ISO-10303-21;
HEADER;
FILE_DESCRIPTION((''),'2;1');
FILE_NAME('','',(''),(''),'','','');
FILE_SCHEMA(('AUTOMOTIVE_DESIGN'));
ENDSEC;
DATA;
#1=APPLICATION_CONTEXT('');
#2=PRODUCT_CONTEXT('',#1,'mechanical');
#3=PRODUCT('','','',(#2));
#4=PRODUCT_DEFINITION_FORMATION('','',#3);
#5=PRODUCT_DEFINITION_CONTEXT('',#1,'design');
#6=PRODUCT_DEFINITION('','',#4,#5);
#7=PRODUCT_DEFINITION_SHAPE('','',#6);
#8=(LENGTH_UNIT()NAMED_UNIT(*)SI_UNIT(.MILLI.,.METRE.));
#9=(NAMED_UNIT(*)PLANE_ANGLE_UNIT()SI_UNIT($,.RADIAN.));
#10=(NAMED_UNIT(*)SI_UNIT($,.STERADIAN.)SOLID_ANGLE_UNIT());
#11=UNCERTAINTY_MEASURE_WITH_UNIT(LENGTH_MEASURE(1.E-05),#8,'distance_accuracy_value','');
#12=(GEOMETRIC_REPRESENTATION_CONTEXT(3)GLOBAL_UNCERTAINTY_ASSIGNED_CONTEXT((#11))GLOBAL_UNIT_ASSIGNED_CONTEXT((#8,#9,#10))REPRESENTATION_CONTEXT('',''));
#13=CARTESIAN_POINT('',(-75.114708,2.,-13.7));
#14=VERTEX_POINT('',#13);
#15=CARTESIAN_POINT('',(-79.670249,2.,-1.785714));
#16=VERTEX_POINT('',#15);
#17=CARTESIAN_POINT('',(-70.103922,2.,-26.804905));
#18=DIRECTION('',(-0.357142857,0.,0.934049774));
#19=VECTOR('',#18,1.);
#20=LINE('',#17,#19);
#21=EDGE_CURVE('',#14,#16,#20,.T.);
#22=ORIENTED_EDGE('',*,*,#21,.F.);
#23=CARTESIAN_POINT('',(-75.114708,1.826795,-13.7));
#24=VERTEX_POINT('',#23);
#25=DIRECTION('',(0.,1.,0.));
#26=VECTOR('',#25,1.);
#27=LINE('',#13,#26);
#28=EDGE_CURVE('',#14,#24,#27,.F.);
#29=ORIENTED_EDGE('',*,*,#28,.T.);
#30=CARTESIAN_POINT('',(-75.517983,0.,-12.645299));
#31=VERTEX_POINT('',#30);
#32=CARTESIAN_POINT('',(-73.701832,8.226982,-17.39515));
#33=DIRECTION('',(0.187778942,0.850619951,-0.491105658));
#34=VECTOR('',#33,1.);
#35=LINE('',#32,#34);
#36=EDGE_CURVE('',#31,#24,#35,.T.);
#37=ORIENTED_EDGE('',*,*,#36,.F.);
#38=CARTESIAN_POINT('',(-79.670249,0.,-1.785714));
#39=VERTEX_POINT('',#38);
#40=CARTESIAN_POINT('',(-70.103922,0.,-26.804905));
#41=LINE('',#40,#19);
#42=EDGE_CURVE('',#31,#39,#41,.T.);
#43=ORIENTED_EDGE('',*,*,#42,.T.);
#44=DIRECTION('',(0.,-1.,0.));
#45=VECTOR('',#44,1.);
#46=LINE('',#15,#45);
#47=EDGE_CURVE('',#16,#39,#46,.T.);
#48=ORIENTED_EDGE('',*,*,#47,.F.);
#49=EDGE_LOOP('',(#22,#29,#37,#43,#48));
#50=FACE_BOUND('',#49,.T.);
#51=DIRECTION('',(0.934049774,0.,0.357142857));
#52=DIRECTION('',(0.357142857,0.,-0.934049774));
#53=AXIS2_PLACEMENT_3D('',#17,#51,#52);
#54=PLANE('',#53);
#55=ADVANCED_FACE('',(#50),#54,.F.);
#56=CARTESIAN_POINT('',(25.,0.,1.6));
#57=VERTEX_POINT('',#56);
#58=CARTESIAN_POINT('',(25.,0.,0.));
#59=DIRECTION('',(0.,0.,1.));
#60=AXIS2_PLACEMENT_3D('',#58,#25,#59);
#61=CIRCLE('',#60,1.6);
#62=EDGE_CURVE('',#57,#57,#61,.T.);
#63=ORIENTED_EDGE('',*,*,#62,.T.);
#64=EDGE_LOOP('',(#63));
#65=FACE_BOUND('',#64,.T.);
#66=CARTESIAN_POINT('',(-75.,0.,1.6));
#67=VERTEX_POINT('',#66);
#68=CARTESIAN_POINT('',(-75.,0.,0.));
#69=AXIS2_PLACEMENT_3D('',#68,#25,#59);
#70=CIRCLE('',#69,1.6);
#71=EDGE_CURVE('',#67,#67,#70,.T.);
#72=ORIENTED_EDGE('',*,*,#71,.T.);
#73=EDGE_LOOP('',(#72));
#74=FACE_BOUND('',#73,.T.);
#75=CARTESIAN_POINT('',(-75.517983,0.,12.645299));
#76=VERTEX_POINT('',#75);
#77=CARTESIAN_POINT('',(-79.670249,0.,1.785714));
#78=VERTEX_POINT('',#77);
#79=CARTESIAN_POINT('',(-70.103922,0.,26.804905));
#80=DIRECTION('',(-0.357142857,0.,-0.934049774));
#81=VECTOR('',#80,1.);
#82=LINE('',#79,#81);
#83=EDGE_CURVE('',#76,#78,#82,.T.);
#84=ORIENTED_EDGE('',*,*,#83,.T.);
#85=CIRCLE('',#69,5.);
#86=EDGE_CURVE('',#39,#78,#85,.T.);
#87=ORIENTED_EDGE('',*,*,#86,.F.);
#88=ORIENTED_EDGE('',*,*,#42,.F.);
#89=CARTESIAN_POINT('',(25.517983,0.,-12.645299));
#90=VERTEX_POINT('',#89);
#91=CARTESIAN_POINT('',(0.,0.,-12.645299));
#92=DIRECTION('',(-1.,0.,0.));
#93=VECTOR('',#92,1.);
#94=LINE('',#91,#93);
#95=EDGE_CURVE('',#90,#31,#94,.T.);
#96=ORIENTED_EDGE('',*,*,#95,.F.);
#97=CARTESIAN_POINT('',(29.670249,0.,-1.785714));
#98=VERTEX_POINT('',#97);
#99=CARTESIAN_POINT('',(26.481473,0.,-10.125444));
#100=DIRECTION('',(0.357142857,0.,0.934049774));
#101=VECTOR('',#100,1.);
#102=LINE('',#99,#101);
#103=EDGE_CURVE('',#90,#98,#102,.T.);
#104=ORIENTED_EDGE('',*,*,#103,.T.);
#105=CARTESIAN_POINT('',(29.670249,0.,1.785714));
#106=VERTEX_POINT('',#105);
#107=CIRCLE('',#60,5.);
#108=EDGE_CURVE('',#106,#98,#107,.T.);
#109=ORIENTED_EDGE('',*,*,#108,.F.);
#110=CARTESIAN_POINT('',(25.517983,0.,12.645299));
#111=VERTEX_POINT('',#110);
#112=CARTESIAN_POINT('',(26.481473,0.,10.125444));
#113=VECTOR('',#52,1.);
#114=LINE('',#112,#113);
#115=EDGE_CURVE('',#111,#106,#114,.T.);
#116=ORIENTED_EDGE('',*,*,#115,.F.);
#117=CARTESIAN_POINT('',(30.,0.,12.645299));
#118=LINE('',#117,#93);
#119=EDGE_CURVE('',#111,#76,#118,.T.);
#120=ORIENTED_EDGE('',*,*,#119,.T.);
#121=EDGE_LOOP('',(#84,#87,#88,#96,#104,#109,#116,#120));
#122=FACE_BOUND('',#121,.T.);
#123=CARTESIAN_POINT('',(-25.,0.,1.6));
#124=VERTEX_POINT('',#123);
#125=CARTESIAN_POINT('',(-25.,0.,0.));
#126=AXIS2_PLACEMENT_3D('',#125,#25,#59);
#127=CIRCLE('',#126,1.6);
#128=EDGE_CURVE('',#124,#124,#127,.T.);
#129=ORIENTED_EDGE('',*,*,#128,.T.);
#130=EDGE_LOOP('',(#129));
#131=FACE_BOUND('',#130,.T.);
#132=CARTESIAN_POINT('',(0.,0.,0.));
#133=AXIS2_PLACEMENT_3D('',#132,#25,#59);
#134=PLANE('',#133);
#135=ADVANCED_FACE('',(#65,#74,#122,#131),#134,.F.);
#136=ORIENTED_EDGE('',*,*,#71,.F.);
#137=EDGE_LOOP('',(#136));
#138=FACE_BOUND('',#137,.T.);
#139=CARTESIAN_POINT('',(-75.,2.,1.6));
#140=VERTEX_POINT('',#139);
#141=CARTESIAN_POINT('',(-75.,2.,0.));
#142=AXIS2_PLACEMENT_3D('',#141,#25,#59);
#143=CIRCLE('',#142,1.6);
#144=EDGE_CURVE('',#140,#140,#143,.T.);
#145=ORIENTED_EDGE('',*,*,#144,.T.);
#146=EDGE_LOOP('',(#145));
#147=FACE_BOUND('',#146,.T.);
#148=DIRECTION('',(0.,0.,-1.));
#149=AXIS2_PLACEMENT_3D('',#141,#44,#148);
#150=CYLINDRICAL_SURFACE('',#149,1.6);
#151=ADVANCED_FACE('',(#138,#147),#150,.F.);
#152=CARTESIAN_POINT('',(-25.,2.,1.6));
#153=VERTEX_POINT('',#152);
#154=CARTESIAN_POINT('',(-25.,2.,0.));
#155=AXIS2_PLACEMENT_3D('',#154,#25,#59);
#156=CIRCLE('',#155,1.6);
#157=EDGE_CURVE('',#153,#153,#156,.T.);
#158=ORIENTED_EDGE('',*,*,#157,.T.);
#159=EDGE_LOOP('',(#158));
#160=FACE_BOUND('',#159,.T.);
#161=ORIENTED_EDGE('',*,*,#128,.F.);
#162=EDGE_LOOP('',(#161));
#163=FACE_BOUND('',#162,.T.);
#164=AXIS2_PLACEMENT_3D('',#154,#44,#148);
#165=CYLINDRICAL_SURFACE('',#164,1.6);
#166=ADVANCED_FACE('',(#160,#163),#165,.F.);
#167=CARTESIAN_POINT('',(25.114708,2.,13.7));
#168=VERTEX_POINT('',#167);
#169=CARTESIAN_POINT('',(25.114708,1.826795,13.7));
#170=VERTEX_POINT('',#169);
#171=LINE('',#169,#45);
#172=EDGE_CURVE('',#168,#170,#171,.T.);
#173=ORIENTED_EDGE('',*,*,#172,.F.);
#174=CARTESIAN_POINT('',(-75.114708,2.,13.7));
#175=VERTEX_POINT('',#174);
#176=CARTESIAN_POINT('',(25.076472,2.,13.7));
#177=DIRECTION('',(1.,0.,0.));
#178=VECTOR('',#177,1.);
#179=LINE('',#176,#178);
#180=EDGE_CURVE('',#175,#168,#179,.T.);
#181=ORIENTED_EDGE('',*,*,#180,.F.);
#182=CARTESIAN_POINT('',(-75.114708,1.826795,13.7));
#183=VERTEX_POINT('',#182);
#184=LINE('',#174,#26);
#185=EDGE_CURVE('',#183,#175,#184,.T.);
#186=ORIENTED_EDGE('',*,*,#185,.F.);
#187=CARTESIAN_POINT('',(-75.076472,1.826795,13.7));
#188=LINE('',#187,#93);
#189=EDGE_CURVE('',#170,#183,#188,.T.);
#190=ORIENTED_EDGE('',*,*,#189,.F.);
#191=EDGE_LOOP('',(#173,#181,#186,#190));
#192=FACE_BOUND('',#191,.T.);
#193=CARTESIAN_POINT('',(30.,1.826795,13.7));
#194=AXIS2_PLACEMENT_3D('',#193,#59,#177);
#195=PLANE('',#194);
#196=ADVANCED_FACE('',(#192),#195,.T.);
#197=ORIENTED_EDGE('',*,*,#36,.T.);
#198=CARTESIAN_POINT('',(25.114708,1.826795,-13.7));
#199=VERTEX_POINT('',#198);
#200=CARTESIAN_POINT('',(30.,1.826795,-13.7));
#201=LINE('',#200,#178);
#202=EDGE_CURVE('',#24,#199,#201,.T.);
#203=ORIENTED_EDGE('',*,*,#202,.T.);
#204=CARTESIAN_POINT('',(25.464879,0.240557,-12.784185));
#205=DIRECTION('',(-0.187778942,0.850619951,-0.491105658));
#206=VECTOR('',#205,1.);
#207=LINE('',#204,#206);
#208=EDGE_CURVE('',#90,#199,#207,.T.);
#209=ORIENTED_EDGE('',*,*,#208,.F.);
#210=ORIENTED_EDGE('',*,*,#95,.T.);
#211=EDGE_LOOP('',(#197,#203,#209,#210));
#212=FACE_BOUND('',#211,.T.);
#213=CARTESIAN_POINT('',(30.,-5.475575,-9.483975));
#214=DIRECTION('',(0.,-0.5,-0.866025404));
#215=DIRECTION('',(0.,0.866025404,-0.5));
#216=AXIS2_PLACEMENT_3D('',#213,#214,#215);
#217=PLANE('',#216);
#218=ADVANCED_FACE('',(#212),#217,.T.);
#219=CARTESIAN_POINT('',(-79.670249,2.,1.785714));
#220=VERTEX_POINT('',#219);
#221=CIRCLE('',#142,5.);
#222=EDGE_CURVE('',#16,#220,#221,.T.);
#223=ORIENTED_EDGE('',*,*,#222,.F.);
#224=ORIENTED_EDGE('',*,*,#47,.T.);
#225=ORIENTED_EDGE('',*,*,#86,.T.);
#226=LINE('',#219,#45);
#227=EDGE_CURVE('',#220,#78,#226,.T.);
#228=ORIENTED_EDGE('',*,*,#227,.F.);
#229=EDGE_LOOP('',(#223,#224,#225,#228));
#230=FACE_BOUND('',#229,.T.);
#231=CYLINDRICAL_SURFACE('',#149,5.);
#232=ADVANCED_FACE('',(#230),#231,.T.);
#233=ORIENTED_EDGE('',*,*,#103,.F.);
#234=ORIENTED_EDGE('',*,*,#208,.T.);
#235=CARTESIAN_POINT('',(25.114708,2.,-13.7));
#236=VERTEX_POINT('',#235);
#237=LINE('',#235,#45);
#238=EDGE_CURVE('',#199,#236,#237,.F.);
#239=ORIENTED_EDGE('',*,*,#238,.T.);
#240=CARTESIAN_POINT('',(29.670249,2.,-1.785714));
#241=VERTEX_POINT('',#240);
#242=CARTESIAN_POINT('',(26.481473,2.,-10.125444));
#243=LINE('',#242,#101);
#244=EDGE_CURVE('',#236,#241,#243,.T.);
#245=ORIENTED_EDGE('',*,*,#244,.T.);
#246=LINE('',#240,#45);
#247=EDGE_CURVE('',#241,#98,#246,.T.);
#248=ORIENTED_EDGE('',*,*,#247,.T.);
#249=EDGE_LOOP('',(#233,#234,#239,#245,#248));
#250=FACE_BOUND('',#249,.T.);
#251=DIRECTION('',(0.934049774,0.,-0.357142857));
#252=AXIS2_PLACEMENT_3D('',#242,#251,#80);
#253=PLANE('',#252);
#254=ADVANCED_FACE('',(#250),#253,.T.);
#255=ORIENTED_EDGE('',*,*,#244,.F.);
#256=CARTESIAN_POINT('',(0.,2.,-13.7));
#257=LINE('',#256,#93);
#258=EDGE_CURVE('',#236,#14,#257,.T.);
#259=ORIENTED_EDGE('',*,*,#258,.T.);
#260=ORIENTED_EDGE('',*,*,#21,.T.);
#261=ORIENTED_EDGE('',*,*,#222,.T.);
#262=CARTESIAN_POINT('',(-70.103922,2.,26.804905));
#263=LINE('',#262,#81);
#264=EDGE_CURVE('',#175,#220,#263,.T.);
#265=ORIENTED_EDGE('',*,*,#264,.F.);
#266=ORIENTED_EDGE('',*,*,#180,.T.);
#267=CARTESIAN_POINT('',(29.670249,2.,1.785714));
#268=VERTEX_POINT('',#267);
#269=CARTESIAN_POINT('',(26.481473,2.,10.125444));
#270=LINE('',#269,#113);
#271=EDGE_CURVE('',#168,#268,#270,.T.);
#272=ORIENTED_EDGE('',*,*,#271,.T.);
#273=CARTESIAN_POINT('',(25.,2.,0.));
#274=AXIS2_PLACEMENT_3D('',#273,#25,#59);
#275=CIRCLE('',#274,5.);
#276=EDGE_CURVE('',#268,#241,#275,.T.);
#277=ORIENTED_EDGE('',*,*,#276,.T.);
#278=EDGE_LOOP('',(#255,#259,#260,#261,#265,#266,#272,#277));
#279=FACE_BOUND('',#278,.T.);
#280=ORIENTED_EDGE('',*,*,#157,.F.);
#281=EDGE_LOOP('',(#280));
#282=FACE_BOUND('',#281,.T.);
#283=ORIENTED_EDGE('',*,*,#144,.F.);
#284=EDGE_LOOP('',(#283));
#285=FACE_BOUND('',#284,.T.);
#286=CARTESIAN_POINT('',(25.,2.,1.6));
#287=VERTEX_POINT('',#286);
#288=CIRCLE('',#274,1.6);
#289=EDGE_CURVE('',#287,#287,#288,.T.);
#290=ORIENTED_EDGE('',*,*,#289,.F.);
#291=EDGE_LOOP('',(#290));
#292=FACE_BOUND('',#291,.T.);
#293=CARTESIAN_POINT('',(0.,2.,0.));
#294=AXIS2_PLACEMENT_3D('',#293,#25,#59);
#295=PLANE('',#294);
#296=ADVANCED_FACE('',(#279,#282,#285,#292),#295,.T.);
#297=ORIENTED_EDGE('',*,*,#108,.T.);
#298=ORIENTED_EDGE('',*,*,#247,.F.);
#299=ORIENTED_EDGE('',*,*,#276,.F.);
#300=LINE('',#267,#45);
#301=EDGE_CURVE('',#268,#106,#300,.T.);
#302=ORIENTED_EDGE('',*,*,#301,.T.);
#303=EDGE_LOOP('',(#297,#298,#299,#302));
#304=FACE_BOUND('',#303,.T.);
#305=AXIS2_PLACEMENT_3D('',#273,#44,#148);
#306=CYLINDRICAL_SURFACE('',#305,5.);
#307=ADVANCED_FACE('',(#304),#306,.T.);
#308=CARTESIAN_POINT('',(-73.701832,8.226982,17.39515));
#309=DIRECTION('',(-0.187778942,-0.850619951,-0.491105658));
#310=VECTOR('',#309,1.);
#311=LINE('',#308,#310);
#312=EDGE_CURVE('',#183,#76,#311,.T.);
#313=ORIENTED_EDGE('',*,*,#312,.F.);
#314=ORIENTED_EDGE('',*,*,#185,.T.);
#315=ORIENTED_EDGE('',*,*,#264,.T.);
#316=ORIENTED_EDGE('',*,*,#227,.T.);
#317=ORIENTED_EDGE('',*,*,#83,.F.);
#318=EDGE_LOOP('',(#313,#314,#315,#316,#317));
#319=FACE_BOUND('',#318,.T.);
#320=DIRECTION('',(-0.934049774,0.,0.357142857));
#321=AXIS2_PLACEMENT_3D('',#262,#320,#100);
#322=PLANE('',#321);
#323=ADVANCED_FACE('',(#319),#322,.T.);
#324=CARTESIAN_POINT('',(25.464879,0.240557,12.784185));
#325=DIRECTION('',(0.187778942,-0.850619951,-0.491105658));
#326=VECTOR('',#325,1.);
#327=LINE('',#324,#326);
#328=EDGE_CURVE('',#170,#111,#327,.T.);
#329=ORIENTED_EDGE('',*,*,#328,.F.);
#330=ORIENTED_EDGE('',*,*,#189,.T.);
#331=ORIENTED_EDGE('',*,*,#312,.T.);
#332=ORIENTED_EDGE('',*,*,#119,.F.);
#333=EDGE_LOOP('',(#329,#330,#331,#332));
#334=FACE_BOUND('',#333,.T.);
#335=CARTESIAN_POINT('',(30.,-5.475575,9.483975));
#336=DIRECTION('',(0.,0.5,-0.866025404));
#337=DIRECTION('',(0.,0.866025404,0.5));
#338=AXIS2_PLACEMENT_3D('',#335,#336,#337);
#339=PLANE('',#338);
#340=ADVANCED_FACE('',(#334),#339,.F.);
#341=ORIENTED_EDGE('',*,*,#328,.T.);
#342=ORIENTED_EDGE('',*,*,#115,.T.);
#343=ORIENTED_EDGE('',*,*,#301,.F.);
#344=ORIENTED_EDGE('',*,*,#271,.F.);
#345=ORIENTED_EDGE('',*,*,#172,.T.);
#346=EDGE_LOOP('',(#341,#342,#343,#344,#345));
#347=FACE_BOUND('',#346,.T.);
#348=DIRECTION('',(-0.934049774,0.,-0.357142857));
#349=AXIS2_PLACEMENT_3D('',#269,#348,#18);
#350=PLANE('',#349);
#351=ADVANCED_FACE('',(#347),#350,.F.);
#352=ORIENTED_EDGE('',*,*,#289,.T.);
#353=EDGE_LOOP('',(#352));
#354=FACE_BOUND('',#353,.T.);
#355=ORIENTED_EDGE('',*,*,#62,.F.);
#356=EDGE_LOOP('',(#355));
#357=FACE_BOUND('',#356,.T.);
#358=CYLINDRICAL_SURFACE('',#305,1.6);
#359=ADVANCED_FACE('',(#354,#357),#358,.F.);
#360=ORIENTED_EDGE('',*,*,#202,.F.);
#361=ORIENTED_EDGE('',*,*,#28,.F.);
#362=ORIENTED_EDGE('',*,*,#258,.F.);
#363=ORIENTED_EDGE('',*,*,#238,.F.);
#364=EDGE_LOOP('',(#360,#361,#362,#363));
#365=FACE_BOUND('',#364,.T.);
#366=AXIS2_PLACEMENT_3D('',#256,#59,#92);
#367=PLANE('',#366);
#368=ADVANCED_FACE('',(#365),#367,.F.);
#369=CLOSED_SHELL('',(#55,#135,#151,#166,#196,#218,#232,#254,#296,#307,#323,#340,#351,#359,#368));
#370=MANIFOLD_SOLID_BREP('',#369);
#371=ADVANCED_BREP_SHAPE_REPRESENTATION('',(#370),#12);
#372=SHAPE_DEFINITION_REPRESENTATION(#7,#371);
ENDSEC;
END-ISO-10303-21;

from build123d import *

# Parameters (mm, degrees)
SKETCH_1_R          = 1.6
EXTRUDE_1_DEPTH     = 2
CUT_EXTRUDE_1_DEPTH = 111.905365064
CHAMFER_1_SIZE      = 0.2
CHAMFER_1_SIZE2     = 0.1
CHAMFER_2_SIZE2     = 0.2
CHAMFER_2_SIZE      = 0.1


with BuildPart() as part:
    # Эскиз1 → Бобышка-Вытянуть1 (new body)
    with BuildSketch(Plane(origin=(0, 0, 0), x_dir=(1, 0, 0), z_dir=(0, 1, 0))):
        with BuildLine():
            Line((-75, 14), (-79.670248868, 1.785714286))
            ThreePointArc((-79.670248868, 1.785714286), (-80, 0), (-79.670248868, -1.785714286))
            Line((-79.670248868, -1.785714286), (-75, -14))
            Line((-75, -14), (25, -14))
            Line((25, -14), (29.670248868, -1.785714286))
            ThreePointArc((29.670248868, -1.785714286), (30, 0), (29.670248868, 1.785714286))
            Line((29.670248868, 1.785714286), (25, 14))
            Line((25, 14), (-75, 14))
        make_face()
        with Locations(Location((-75, 0, 0), (0, 0, 270))):
            Circle(SKETCH_1_R, mode=Mode.SUBTRACT)
        with Locations(Location((-25, 0, 0), (0, 0, 270))):
            Circle(SKETCH_1_R, mode=Mode.SUBTRACT)
        with Locations(Location((25, 0, 0), (0, 0, 270))):
            Circle(SKETCH_1_R, mode=Mode.SUBTRACT)
    extrude(amount=EXTRUDE_1_DEPTH)

    # Эскиз3 → Вырез-Вытянуть1 (cut, through all)
    with BuildSketch(Plane.ZY.offset(80)):
        Polygon((-13.8, 2), (-12.645299462, 0), (-14, 0), (-14, 2), align=None)
        Polygon((13.8, 2), (12.645299462, 0), (14, 0), (14, 2), align=None)
    extrude(amount=-CUT_EXTRUDE_1_DEPTH, mode=Mode.SUBTRACT)

    # Фаска1
    chamfer_1_edges = [part.edges().sort_by_distance(p)[0] for p in [
        (-25, 2, -13.8),
    ]]
    chamfer_1_side = [part.faces().sort_by_distance(p)[0] for p in [
        (-25, 0.998536994, -13.221805064),
    ]]
    chamfer(chamfer_1_edges, length=CHAMFER_1_SIZE, length2=CHAMFER_1_SIZE2, reference=chamfer_1_side[0])

    # Фаска2
    chamfer_2_edges = [part.edges().sort_by_distance(p)[0] for p in [
        (-25, 2, 13.8),
    ]]
    chamfer_2_side = [part.faces().sort_by_distance(p)[0] for p in [
        (-25, 2, 13.798),
    ]]
    chamfer(chamfer_2_edges, length=CHAMFER_2_SIZE - 0.0001, length2=CHAMFER_2_SIZE2 - 0.0001, reference=chamfer_2_side[0])  # a hair under: the kernel refuses the full size


solid = part.part
